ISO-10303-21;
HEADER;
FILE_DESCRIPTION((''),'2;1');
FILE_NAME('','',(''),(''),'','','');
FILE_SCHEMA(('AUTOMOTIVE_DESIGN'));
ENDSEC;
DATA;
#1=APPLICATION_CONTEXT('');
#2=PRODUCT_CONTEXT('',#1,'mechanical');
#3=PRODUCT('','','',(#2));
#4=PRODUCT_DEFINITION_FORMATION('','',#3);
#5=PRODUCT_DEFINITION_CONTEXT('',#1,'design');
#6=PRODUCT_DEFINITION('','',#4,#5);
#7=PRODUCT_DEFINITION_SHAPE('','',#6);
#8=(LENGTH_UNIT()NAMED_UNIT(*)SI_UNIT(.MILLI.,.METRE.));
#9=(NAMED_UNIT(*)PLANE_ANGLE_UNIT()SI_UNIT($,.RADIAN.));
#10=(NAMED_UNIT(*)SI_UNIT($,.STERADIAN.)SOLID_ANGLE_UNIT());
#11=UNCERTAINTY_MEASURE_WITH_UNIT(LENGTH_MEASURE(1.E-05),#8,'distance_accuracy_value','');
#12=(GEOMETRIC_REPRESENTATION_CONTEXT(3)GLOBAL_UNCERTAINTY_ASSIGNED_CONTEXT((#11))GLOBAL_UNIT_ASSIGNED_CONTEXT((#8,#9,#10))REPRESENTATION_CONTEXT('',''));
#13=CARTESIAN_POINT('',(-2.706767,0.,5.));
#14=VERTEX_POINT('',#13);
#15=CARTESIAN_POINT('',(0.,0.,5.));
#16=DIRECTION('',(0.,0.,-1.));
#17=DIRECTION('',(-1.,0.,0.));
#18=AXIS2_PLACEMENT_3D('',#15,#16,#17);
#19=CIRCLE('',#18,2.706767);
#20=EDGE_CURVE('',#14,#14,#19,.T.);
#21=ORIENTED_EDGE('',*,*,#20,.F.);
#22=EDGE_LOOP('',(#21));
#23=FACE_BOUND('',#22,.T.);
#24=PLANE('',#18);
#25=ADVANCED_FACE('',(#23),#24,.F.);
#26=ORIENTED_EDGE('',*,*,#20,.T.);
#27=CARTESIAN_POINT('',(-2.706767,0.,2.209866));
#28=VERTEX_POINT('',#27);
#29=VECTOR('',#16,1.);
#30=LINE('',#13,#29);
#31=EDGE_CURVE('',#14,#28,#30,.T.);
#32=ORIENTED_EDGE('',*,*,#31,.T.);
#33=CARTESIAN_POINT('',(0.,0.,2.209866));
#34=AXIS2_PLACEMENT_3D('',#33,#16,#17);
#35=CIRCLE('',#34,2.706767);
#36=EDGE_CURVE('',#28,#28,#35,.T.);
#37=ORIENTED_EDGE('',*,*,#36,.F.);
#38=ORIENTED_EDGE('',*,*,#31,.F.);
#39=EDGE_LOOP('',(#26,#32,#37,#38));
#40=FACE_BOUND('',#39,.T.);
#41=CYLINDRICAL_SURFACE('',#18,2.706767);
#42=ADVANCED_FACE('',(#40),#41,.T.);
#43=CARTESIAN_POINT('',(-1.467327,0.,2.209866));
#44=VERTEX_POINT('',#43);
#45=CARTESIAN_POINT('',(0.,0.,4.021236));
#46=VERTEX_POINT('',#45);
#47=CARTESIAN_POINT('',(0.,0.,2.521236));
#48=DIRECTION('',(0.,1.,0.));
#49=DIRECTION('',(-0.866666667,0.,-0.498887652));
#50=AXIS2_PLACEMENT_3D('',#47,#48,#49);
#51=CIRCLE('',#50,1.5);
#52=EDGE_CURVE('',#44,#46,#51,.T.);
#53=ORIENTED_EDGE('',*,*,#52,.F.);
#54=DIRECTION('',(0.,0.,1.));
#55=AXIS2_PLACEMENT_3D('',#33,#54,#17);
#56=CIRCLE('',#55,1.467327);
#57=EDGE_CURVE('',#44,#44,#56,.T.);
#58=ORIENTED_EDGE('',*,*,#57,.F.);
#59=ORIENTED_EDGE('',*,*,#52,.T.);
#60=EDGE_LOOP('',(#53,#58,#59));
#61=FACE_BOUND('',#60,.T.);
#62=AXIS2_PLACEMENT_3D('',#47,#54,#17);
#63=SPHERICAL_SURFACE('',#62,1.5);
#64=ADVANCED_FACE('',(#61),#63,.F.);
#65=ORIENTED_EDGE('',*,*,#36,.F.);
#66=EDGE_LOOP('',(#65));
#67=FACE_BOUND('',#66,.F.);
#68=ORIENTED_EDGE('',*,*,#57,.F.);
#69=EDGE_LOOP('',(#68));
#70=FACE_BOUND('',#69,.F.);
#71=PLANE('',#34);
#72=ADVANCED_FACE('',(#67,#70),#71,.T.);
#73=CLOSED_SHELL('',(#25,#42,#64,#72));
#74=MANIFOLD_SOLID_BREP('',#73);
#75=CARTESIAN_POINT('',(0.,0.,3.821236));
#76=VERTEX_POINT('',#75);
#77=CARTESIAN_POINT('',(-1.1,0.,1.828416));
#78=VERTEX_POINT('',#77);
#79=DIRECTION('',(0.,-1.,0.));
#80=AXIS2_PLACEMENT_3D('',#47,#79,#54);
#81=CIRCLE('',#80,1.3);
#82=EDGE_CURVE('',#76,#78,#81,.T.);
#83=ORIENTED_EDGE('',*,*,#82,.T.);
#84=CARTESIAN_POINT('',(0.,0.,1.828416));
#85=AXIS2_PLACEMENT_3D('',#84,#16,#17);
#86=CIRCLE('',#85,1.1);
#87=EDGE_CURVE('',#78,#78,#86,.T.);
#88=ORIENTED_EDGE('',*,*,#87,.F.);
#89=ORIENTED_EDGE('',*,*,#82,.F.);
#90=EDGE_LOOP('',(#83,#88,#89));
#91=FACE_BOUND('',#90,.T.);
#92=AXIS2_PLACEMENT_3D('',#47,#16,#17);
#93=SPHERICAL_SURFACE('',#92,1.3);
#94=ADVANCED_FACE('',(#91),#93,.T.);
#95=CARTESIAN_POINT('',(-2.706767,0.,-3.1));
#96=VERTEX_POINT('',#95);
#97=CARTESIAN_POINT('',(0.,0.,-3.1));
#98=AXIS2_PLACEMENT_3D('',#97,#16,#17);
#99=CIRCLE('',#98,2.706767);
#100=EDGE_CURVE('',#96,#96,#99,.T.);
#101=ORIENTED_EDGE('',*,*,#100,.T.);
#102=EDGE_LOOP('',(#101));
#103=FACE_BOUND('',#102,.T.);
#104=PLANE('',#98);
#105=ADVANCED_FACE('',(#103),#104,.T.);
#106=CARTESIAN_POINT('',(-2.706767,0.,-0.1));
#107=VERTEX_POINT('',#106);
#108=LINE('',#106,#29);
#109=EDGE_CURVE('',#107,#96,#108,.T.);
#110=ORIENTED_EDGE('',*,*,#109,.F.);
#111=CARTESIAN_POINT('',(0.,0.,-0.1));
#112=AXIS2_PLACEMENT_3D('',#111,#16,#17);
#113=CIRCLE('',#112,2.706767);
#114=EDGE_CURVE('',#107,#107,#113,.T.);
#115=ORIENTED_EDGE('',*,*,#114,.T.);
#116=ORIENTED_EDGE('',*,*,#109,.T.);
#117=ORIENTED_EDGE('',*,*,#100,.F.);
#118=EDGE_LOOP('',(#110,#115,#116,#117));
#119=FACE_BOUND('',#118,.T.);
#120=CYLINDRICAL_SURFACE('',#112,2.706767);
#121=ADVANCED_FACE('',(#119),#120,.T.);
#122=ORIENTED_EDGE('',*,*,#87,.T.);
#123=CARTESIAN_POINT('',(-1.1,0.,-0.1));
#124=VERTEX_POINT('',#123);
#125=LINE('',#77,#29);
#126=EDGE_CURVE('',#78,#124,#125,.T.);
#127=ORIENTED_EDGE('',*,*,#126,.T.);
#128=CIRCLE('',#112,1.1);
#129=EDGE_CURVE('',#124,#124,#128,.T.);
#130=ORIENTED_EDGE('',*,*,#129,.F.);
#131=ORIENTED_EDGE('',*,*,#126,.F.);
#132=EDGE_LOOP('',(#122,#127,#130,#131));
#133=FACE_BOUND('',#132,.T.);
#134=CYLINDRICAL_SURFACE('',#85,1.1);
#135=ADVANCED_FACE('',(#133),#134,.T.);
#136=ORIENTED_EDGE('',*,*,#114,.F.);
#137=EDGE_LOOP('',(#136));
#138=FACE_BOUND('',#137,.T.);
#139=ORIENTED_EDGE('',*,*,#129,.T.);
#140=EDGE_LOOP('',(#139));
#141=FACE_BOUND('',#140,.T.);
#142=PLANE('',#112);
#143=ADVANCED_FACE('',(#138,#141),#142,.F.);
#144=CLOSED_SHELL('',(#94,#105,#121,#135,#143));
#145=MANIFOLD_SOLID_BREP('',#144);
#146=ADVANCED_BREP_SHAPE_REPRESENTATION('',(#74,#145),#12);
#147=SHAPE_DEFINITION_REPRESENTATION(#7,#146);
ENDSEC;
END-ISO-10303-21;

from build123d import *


with BuildPart() as f1:
    # F0 (on Front) → F1 (revolve)
    with BuildSketch(Plane.XZ):
        with BuildLine():
            ThreePointArc((-1.3, 1.772904835), (-1.2985563553, 3.2720701102), (0, 4.0212363124))
            Line((0, 4.0212363124), (0, 5))
            Line((0, 5), (-2.7067668361, 5))
            Line((-2.7067668361, 5), (-2.7067668361, 0))
            Line((-2.7067668361, 0), (-1.3, 0))
            Line((-1.3, 0), (-1.3, 1.772904835))
        make_face()
    revolve(axis=Axis((0, 0, 4.5106181562), (0, 0, -1)))

    # F4 (on Front) → F5 (revolve, cut)
    with BuildSketch(Plane.XZ):
        Polygon((0, 2.2098657209), (-1.4926502481, 2.2098657209), (-2.730937209, 2.2098657209), (-2.730937209, 0), (0, 0), align=None)
    revolve(axis=Axis((0, 0, 5), (0, 0, -1)), mode=Mode.SUBTRACT)


with BuildPart() as f3:
    # F2 (on Front) → F3 (revolve)
    with BuildSketch(Plane.XZ):
        with BuildLine():
            ThreePointArc((0, 3.8212363124), (-1.1381270623, 3.1494614233), (-1.1, 1.8284159893))
            Line((-1.1, 1.8284159893), (-1.1, -0.1))
            Line((-1.1, -0.1), (-2.7067668361, -0.1))
            Line((-2.7067668361, -0.1), (-2.7067668361, -3.1))
            Line((-2.7067668361, -3.1), (0, -3.1))
            Line((0, -3.1), (0, 0.2588959377))
            Line((0, 0.2588959377), (0, 3.8212363124))
        make_face()
    revolve(axis=Axis((0, 0, 0.3606181562), (0, 0, -1)))


solid = Compound([f1.part, f3.part])
